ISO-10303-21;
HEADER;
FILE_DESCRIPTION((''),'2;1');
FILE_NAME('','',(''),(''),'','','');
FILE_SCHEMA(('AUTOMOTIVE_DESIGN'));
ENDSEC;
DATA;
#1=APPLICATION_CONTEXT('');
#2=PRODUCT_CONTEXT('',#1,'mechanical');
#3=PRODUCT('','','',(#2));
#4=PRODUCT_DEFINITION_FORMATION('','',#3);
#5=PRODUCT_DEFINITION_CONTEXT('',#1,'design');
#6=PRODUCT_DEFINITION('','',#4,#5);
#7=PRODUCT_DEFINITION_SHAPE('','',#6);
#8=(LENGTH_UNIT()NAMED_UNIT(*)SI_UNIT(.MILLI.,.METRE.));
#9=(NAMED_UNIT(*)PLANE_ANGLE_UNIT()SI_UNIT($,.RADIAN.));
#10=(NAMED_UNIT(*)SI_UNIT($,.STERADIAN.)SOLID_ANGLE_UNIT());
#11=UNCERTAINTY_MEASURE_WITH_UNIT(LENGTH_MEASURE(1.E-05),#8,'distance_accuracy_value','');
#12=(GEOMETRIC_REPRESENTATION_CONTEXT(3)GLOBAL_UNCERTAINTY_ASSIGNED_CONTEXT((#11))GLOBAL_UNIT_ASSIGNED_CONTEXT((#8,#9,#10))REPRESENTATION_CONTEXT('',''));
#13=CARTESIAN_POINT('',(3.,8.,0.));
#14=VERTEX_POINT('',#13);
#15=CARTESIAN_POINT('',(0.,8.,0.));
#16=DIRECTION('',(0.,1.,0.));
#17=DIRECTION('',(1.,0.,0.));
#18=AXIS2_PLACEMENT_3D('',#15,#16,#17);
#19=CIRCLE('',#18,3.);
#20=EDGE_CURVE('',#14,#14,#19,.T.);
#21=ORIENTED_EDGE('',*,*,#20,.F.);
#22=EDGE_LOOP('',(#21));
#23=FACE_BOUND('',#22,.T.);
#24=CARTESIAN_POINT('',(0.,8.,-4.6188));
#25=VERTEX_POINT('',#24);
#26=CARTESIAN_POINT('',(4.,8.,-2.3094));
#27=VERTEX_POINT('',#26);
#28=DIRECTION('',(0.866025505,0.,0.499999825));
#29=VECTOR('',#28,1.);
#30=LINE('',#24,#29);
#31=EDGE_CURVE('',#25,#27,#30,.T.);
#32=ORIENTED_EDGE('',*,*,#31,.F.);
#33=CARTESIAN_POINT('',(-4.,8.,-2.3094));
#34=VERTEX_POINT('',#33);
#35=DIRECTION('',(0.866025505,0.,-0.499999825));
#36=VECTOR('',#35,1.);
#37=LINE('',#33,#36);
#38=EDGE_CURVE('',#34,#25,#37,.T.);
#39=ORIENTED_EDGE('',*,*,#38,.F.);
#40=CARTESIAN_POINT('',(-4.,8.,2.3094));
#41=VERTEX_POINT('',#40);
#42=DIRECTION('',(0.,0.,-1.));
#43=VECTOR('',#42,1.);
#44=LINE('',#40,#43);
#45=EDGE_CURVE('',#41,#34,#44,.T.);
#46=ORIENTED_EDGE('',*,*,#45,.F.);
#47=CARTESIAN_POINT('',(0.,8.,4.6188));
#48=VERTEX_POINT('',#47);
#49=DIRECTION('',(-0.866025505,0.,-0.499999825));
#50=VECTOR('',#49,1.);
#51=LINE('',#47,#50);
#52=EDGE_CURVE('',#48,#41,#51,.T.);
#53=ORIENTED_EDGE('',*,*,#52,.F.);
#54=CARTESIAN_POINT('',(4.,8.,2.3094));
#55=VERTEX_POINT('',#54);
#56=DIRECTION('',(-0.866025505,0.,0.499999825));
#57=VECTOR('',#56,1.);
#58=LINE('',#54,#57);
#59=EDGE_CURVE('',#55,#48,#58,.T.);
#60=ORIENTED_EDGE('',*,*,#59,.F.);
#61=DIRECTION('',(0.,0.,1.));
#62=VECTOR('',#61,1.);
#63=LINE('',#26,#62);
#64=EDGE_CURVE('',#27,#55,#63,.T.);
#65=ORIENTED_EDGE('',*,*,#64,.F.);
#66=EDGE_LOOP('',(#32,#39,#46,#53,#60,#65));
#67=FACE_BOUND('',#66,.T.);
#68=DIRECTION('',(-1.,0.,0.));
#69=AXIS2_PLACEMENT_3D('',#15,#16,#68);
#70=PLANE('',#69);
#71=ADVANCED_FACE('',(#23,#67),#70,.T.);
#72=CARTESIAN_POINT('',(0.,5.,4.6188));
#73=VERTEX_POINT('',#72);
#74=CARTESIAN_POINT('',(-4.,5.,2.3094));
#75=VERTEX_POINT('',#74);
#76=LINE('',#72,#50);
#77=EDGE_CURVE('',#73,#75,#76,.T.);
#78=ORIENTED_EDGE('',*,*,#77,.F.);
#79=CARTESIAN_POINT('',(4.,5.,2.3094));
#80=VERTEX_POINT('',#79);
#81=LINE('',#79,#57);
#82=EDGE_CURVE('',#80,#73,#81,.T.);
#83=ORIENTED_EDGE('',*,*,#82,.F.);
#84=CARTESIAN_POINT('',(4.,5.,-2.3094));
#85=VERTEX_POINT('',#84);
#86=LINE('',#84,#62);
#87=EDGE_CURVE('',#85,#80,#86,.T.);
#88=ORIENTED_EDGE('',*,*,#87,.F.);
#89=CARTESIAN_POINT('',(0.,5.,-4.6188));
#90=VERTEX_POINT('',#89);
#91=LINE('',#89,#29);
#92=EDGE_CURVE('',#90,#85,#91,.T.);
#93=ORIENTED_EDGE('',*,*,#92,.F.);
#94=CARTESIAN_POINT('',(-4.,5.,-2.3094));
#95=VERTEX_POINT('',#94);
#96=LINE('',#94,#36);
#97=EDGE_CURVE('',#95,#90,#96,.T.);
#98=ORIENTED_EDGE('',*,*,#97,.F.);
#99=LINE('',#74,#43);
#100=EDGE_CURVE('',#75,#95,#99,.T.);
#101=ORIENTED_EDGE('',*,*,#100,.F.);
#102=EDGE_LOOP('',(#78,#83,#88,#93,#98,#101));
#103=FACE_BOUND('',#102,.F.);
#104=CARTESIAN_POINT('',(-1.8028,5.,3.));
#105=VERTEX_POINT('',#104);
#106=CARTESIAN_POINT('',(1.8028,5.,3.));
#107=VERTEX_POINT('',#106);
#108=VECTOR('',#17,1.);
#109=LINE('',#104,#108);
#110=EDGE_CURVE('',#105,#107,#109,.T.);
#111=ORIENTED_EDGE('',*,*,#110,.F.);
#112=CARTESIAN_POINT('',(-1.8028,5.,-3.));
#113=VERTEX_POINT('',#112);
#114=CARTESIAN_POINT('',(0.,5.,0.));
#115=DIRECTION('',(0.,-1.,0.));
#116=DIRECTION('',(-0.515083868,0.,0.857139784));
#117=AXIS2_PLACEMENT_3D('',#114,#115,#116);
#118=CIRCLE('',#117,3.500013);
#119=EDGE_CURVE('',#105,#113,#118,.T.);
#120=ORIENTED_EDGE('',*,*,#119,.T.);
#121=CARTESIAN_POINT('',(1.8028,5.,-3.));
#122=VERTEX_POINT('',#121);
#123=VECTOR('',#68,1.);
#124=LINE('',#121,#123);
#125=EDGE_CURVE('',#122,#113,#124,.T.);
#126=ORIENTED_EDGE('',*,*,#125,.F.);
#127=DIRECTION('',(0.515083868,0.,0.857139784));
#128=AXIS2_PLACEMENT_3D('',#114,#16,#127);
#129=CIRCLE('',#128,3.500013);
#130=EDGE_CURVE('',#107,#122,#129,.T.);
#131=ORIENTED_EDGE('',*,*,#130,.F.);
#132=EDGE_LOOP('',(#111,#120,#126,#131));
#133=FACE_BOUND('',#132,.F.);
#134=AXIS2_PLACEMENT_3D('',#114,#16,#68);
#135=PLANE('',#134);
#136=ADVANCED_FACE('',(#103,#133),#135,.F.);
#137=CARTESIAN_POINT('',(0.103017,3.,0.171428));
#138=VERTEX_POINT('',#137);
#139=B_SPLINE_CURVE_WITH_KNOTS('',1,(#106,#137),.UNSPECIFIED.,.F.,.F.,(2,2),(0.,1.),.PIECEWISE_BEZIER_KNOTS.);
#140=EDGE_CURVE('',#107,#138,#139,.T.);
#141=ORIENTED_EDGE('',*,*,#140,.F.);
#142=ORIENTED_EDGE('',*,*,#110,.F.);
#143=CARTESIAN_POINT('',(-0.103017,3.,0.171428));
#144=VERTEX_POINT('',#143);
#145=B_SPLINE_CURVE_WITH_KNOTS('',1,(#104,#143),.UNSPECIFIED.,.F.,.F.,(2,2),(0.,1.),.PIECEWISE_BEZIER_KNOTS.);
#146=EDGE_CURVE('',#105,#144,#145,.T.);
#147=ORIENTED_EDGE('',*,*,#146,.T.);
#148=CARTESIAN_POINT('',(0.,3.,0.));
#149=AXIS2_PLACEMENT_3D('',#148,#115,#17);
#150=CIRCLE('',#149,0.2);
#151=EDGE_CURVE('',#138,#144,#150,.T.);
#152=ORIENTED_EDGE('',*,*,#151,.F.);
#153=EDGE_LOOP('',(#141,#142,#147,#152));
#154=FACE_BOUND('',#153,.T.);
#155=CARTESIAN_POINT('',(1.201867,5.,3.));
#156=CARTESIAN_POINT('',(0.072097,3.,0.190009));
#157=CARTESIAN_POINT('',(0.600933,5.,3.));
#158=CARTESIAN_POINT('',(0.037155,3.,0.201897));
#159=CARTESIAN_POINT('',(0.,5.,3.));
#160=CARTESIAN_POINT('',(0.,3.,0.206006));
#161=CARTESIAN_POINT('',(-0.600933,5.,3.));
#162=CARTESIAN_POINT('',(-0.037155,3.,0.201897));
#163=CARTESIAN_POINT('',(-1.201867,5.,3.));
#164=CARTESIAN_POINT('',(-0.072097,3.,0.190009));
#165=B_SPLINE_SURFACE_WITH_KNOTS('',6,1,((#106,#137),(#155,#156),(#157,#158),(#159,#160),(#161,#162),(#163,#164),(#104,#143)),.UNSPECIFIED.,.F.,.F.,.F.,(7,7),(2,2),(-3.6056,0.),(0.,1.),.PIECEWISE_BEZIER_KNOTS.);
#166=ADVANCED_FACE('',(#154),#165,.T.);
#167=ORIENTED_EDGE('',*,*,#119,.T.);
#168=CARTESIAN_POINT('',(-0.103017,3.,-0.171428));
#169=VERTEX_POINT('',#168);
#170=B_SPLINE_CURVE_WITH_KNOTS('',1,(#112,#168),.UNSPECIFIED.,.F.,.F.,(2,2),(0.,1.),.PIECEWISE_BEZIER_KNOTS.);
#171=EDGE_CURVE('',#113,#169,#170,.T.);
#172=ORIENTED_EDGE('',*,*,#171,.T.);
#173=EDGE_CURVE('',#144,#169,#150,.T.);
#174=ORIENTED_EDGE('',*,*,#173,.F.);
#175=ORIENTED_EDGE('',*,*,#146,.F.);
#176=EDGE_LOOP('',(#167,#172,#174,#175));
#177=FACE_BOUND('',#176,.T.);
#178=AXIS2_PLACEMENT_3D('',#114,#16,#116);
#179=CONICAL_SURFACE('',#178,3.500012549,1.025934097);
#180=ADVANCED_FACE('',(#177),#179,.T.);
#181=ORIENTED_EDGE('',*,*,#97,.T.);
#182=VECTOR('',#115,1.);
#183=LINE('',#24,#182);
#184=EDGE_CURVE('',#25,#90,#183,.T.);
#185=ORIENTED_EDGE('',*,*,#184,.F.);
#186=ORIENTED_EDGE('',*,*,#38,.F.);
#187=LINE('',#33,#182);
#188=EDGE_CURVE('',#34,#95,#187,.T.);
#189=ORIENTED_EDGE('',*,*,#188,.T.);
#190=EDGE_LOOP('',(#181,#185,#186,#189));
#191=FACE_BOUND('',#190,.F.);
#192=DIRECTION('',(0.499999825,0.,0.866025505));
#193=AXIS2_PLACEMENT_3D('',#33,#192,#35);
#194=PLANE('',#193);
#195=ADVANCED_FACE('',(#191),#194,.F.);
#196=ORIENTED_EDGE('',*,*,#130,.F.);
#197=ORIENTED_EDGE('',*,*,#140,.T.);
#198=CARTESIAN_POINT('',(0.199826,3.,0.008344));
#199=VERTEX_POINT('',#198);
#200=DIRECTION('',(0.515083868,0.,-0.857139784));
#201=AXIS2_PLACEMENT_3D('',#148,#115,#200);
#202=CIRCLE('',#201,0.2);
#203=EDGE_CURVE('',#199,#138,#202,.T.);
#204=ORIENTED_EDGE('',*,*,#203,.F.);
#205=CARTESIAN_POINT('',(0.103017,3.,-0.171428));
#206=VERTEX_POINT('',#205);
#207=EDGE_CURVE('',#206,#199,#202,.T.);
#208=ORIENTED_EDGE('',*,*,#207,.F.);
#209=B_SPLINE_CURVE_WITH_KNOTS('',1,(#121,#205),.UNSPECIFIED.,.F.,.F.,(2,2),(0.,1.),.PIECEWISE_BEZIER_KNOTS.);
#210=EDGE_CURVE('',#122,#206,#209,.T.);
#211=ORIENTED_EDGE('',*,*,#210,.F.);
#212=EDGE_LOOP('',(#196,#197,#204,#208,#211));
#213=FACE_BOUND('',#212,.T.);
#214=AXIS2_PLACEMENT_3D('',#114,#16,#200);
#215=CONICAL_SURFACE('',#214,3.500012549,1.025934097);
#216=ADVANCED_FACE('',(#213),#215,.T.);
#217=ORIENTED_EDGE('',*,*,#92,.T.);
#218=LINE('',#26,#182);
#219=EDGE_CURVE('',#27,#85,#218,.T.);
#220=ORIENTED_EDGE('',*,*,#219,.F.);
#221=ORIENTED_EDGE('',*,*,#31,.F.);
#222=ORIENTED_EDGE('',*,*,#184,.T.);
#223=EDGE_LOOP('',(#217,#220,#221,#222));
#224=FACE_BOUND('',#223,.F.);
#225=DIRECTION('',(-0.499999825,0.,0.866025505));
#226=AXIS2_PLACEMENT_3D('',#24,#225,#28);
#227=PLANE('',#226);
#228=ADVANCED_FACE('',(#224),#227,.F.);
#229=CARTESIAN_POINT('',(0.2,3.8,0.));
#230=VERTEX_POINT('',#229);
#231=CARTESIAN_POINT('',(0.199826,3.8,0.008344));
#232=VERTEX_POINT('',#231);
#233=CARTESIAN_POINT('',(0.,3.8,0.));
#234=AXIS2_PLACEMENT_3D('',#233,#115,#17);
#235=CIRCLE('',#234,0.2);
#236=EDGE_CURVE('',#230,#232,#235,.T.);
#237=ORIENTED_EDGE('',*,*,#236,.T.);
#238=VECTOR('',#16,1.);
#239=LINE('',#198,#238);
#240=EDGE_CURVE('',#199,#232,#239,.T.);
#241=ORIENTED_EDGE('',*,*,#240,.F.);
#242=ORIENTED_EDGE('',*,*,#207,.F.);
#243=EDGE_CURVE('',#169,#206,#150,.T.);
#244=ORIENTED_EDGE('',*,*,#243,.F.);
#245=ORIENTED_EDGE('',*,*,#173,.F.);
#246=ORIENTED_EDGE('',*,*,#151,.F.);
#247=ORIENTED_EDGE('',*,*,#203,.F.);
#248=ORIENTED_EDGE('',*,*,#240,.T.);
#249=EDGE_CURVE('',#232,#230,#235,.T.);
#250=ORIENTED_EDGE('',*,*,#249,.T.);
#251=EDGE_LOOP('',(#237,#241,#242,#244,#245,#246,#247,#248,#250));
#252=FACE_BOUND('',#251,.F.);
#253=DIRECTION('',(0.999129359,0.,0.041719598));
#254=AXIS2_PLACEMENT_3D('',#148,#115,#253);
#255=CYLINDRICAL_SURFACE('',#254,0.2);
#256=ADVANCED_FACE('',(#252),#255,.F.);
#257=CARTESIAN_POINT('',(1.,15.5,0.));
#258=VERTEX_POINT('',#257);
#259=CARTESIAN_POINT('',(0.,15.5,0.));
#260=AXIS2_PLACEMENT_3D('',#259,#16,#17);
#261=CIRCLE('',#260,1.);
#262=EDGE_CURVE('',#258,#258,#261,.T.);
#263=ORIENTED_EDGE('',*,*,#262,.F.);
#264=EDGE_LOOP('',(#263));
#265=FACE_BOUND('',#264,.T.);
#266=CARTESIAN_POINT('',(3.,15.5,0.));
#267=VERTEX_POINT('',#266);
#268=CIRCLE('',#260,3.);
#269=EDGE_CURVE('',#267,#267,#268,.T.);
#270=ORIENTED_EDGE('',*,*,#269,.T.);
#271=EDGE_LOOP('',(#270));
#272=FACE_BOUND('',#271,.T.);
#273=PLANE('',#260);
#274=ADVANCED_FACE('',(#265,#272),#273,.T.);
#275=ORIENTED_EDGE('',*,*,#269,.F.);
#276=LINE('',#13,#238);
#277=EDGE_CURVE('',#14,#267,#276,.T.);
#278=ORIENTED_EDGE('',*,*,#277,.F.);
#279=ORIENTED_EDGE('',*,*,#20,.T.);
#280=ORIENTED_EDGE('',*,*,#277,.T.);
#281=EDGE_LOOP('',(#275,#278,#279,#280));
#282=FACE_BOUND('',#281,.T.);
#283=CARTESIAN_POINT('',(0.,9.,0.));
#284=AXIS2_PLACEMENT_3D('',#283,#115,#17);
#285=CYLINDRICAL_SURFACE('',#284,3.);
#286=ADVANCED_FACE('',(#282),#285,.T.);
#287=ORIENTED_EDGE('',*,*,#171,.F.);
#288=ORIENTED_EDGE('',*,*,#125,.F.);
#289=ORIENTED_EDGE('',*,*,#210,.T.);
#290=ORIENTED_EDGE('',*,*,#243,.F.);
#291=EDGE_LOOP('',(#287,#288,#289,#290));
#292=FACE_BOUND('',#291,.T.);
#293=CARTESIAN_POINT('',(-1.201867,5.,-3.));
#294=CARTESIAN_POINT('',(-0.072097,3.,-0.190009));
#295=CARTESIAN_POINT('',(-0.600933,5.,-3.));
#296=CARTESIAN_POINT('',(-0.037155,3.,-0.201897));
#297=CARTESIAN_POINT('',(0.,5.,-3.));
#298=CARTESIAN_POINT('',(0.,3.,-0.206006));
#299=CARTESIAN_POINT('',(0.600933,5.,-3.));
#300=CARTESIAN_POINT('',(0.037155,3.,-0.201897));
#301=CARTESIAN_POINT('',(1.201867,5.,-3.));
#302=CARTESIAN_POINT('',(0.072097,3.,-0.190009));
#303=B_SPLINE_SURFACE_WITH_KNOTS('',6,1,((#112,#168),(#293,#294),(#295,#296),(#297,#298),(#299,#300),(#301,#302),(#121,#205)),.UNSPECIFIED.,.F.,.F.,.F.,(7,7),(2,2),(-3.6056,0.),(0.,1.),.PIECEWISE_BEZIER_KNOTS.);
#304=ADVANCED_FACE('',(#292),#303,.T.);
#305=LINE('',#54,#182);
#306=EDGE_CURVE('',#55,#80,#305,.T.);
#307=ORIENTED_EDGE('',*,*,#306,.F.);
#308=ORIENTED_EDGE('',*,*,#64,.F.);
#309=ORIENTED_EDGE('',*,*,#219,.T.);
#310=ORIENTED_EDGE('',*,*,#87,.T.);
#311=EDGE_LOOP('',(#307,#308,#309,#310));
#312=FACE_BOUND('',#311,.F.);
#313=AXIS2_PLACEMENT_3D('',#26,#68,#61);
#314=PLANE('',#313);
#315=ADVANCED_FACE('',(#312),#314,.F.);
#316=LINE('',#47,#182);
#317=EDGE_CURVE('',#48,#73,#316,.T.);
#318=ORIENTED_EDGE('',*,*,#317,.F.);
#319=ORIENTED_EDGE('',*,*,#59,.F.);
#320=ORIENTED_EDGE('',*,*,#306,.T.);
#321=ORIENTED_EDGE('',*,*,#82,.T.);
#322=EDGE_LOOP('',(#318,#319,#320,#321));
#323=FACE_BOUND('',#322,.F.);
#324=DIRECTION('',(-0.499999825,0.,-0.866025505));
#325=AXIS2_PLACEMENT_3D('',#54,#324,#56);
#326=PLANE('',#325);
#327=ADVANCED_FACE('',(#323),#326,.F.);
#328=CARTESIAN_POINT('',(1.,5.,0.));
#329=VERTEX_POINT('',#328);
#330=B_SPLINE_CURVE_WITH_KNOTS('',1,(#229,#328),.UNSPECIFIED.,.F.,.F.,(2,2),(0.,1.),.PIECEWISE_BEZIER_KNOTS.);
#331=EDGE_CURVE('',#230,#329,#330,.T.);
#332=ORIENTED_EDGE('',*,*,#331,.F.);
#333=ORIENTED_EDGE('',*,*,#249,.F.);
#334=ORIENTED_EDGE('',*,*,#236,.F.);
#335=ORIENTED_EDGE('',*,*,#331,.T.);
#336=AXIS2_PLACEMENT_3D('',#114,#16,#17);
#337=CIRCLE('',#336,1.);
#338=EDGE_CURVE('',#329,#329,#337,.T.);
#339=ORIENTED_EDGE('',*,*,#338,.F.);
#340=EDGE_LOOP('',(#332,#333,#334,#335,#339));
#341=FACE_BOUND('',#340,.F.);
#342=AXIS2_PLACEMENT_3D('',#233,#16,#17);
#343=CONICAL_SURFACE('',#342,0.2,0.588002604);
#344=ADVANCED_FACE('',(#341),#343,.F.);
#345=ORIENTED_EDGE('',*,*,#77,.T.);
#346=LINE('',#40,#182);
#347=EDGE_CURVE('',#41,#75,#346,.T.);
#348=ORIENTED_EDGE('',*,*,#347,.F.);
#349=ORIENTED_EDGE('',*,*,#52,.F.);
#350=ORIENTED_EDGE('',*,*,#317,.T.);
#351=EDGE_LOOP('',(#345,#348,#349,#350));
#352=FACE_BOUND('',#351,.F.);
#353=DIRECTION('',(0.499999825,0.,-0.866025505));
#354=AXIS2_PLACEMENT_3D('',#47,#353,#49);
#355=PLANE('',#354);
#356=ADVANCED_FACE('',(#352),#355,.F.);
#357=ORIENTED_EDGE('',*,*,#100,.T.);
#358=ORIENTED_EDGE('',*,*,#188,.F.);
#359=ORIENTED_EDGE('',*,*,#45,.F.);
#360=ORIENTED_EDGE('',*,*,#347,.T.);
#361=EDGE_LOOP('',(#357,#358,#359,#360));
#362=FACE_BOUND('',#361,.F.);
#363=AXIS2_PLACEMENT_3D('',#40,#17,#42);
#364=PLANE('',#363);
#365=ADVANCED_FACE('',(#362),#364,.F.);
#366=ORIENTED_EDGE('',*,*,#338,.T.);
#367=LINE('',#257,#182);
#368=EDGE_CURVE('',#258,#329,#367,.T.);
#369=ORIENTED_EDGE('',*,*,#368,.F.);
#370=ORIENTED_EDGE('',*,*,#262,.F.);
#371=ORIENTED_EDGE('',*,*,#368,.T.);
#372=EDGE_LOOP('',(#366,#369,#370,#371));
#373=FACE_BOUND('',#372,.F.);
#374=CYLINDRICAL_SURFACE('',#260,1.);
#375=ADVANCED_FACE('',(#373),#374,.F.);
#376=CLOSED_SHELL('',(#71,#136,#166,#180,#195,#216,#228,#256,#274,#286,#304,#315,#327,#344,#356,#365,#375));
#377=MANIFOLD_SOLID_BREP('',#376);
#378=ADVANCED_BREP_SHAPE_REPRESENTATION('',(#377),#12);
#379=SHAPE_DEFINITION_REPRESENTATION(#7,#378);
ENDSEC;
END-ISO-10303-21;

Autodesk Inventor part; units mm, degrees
ref_plane "YZ Plane" through (0, 0, 0) normal (1, 0, 0) x (0, 1, 0)
ref_plane "Plano de trabajo1" through (0, 8, 0) normal (0, 1, 0) x (-1, 0, 0)
sketch "Boceto2" plane through (0, 8, 0) normal (0, 1, 0) x (-1, 0, 0)
  line L0 (0, -4.6188) -> (-4, -2.3094)
  line L1 (-4, -2.3094) -> (-4, 2.3094)
  line L2 (-4, 2.3094) -> (0, 4.6188)
  line L3 (0, 4.6188) -> (4, 2.3094)
  line L4 (4, 2.3094) -> (4, -2.3094)
  line L5 (4, -2.3094) -> (0, -4.6188)
  point P0 (0, 0)
  point P1 (0, 0)
  dimension "d2" = 8
extrude "Extrusión1" add sketch "Boceto2" against normal blind 3
sketch "Boceto3" plane through (0, 8, 0) normal (0, 1, 0) x (1, 0, 0)
  circle A0 centre (0, 0) radius 3
  circle A1 centre (0, 0) radius 3
  dimension "d9" = 6
  dimension "d10" = 6
extrude "Extrusión2" add sketch "Boceto3" along normal blind 1
sketch "Boceto4" plane through (0, 9, 0) normal (0, 1, 0) x (1, 0, 0)
  circle A0 centre (0, 0) radius 3 projected
extrude "Extrusión3" add sketch "Boceto4" along normal blind 6.5
sketch "Boceto6" plane through (0, 15.5, 0) normal (0, 1, 0) x (1, 0, 0)
  circle A0 centre (0, 0) radius 1
  dimension "d26" = 2
extrude "Extrusión4" cut sketch "Boceto6" against normal blind 12.25
sketch "Boceto12" plane through (0, 5, 0) normal (0, -1, 0) x (1, 0, 0)
  circle A0 centre (0, 0) radius 1
  line L0 (-1.8028, 3) -> (1.8028, 3)
  arc A1 (1.8028, -3) -> (1.8028, 3) centre (0, 0) ccw
  arc A2 (-1.8028, 3) -> (-1.8028, -3) centre (0, 0) ccw
  line L1 (1.8028, -3) -> (-1.8028, -3)
ref_plane "Plano de trabajo6" through (0, 3.8, 0) normal (0, -1, 0) x (1, 0, 0)
ref_plane "Plano de trabajo5" through (0, 3, 0) normal (0, -1, 0) x (1, 0, 0)
sketch "Boceto13" plane through (0, 3, 0) normal (0, -1, 0) x (1, 0, 0)
  circle A0 centre (0, 0) radius 0.2
  dimension "d44" = 0.4
sketch "Boceto14" plane through (0, 3.8, 0) normal (0, -1, 0) x (1, 0, 0)
  circle A0 centre (0, 0) radius 0.2
  dimension "d45" = 0.4
loft "Solevación2" add profiles "Boceto12", "Boceto13" contours A0 | L0 A1 L1 A2 / all
loft "Solevación3" cut profiles "Boceto14" section 2 edges at (-1, 5, 0)
sketch "Boceto15" plane through (0, 3, 0) normal (0, -1, 0) x (0.9991294, 0, 0.0417196)
  circle A0 centre (0, 0) radius 0.2
  dimension "d54" = 0.4
extrude "Extrusión8" cut sketch "Boceto15" against normal blind 2
properties part number "boquilla 0.4" material "Latón, amarillo claro"
